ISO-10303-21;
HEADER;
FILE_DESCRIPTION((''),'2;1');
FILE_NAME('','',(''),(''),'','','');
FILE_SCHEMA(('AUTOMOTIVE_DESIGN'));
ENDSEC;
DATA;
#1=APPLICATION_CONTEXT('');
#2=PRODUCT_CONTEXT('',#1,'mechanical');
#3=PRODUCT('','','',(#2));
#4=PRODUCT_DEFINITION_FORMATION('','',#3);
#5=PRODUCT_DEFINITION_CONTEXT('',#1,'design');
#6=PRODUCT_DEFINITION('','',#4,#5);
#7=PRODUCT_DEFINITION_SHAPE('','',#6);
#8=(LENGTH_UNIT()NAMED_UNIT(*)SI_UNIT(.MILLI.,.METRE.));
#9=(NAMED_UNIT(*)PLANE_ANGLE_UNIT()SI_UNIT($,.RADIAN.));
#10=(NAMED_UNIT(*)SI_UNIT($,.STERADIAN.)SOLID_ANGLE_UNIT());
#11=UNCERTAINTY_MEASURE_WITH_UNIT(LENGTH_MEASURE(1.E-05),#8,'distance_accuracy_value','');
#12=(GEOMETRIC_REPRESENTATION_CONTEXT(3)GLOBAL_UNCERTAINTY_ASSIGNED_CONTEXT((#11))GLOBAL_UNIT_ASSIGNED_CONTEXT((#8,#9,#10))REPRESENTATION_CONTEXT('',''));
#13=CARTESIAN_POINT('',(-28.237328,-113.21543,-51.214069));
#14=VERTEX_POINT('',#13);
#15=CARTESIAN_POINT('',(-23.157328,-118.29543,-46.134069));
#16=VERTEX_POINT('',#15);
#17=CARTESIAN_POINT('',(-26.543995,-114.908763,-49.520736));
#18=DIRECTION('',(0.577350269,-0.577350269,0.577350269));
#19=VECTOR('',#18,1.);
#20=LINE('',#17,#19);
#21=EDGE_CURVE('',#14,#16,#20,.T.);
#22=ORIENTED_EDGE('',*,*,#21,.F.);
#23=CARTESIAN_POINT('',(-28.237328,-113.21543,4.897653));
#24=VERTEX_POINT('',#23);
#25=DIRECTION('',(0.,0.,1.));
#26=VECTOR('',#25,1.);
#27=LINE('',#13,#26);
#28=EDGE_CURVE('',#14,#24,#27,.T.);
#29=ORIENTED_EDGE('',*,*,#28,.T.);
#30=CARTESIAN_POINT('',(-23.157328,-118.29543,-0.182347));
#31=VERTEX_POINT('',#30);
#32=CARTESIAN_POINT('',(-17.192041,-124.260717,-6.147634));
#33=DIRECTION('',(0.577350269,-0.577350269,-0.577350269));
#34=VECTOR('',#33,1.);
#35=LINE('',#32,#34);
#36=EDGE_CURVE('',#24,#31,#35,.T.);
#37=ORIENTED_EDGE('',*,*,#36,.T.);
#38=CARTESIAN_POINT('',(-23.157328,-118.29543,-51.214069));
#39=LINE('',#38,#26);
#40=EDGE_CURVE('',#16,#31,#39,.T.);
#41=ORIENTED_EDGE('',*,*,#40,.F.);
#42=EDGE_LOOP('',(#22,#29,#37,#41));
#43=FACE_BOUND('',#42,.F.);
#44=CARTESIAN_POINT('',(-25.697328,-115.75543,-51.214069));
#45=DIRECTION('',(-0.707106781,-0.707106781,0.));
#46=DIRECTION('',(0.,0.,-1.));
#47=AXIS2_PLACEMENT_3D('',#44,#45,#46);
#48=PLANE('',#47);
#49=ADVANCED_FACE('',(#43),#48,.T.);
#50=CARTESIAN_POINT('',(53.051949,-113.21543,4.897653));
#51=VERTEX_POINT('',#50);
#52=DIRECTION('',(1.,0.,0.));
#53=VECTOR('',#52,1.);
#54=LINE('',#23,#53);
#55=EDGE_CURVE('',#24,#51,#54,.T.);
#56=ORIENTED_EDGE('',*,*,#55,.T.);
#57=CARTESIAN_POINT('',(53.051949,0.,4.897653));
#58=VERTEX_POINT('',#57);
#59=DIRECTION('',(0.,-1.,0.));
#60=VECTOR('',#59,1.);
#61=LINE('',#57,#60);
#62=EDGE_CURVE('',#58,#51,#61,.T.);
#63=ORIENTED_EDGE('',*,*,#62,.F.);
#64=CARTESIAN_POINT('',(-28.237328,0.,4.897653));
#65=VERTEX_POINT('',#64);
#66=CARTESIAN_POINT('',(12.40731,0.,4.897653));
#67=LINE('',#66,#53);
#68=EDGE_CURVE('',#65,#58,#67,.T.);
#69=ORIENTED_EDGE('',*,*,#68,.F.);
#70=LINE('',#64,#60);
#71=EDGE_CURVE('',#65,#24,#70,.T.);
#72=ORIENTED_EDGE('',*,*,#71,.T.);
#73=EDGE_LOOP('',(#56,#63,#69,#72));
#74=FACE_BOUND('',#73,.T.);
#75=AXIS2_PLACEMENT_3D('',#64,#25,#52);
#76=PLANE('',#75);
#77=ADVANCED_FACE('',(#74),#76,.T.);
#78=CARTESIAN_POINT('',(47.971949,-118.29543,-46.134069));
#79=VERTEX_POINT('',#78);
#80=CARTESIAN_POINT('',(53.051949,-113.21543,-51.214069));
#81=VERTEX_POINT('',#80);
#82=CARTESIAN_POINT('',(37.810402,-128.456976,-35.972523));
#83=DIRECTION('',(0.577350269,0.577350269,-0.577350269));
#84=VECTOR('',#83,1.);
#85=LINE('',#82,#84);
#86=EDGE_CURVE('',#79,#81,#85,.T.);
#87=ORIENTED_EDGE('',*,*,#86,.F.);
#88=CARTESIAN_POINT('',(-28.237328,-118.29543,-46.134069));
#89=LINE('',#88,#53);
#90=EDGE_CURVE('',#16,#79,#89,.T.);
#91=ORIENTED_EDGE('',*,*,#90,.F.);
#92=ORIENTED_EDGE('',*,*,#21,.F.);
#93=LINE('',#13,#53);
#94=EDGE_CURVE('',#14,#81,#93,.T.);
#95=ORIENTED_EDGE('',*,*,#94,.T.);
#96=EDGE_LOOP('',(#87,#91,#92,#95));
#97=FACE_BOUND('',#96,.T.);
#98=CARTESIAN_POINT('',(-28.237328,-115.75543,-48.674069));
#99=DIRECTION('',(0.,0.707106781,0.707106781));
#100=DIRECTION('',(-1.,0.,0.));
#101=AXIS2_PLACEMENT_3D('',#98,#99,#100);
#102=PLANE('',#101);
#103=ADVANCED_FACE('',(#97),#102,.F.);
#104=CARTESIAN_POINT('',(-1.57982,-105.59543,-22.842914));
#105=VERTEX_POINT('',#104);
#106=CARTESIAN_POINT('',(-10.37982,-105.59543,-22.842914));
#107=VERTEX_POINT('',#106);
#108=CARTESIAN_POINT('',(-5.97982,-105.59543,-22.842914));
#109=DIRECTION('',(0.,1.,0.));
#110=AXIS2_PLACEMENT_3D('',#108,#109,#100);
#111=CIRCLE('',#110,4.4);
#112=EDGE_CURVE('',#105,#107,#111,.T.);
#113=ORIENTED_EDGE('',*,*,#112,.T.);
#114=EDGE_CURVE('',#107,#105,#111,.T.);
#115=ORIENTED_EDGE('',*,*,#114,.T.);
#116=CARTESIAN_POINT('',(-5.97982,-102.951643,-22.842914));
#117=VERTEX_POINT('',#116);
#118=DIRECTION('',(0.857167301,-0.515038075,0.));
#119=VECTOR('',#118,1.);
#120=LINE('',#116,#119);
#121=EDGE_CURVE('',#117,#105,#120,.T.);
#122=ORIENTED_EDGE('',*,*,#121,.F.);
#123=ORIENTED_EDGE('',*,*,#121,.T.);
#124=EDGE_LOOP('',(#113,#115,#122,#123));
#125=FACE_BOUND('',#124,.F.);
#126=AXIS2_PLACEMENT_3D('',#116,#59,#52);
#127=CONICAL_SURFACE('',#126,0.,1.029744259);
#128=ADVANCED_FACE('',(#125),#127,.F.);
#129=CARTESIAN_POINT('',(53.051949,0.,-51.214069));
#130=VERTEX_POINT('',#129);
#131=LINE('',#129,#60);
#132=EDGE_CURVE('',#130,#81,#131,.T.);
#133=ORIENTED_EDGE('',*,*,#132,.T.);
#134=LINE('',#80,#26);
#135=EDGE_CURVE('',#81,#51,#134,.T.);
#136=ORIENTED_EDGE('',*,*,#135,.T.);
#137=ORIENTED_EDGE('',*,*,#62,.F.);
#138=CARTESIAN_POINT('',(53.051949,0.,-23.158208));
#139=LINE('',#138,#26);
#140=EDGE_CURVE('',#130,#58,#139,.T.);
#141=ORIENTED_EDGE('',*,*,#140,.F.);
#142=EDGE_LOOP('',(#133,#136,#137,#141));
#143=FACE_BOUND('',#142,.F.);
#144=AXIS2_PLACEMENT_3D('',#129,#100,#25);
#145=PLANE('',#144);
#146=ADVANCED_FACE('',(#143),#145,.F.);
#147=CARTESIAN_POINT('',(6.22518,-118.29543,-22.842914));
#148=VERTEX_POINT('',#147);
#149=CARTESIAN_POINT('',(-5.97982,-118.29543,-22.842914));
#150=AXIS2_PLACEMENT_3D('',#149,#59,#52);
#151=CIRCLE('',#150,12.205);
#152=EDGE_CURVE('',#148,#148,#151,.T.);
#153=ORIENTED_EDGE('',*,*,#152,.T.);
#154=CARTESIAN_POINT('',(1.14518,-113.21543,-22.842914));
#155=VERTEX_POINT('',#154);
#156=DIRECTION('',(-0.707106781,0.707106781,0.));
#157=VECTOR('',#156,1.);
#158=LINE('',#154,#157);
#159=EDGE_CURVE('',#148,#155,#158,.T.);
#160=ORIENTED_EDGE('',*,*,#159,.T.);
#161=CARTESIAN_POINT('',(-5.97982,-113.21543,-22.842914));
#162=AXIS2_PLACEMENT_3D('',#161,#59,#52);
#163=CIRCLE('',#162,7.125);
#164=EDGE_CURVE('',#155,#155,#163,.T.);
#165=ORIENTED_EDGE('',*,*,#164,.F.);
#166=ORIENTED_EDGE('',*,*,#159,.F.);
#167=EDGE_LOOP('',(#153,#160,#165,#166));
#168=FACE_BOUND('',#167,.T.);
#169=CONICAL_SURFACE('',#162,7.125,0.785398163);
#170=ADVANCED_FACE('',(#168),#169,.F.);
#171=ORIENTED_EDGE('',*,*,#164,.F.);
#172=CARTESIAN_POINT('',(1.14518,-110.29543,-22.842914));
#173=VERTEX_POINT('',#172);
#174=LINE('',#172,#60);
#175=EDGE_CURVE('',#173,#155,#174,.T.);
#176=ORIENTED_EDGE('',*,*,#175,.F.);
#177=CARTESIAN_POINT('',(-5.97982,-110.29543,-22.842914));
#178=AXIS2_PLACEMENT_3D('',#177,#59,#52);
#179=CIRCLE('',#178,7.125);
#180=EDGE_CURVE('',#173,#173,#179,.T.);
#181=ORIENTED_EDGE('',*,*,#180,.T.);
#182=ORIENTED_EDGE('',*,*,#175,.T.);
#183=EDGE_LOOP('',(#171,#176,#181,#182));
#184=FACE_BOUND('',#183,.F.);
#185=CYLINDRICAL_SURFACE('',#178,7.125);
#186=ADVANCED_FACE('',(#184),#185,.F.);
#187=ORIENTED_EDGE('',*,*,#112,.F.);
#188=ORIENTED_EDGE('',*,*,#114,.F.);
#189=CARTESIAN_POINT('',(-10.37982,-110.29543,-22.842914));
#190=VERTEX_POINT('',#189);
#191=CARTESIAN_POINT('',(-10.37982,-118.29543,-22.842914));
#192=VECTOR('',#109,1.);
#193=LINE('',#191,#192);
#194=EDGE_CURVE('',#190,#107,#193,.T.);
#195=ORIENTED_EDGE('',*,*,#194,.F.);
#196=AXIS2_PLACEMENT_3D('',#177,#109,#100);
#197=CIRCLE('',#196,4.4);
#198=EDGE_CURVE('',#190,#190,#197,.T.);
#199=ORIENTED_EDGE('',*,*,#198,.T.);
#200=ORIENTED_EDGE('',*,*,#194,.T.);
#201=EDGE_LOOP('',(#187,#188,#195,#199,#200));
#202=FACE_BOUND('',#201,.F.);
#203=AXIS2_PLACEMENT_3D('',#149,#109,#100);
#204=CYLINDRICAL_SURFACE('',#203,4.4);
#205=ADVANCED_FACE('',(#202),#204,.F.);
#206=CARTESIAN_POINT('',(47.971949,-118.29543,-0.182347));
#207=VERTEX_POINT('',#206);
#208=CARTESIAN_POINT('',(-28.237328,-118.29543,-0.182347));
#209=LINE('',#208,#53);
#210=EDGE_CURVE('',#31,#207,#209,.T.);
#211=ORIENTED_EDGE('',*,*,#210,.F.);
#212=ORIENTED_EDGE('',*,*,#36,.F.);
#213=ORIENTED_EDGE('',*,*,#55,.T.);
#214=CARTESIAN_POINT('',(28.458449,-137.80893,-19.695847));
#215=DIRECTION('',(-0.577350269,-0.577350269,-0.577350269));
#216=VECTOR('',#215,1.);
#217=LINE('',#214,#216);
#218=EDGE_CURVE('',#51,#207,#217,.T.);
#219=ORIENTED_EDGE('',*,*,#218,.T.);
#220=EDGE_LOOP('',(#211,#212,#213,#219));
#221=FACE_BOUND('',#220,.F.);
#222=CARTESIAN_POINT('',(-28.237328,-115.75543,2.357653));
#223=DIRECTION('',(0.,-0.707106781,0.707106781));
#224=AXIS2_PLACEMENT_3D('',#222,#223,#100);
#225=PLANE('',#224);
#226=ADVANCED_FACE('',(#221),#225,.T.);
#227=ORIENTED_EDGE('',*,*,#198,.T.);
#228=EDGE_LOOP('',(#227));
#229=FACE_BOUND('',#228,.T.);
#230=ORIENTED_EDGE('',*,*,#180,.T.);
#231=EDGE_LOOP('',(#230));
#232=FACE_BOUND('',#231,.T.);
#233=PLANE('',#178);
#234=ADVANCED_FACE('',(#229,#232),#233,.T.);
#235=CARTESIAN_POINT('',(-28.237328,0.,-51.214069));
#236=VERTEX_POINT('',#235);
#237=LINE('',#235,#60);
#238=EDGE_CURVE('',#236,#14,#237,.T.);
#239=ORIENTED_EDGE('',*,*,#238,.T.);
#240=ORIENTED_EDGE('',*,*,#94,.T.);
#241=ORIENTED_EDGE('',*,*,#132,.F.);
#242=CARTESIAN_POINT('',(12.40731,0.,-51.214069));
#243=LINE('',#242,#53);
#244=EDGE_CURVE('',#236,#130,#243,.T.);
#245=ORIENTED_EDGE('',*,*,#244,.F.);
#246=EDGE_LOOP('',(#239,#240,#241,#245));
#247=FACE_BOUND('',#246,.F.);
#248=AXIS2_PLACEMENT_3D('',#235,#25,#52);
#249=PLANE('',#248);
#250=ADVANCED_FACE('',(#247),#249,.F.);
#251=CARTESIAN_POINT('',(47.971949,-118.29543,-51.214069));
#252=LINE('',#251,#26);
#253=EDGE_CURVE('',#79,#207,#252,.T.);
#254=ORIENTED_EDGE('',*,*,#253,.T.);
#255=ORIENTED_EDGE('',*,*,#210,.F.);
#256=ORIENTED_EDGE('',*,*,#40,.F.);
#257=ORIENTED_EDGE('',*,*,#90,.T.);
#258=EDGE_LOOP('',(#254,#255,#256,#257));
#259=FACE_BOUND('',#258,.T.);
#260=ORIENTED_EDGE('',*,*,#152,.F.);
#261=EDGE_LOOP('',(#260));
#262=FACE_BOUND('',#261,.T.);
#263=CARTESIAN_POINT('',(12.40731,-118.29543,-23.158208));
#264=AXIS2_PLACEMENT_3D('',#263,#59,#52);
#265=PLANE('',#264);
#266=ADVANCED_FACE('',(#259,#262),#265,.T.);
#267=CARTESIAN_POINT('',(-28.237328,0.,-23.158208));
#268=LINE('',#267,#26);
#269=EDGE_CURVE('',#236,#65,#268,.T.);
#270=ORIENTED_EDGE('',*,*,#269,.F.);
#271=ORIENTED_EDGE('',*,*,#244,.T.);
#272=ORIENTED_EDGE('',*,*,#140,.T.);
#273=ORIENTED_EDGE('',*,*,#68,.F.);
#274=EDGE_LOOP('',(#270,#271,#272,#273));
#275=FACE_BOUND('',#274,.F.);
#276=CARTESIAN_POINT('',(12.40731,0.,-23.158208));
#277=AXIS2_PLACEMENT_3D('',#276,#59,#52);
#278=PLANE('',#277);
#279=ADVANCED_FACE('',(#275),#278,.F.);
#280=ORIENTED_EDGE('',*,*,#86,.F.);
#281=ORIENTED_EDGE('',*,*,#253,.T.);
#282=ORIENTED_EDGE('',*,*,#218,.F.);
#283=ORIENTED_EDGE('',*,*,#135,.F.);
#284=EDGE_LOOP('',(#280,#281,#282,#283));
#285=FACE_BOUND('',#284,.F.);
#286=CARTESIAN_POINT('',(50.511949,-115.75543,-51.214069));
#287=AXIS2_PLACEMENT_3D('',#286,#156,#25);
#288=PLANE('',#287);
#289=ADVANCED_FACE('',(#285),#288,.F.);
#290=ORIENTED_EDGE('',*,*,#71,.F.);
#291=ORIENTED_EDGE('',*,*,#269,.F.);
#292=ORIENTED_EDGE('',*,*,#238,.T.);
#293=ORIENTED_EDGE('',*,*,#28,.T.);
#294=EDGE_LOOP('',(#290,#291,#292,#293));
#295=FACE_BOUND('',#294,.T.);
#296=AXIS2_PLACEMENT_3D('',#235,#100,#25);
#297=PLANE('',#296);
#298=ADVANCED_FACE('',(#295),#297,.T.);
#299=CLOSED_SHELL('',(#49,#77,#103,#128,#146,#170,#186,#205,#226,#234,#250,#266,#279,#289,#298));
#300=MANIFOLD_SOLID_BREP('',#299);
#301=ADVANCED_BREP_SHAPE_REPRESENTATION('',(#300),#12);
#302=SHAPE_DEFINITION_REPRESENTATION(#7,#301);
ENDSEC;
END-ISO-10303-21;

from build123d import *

# Parameters (mm, degrees)
F0_W           = 81.2892764807
F0_H           = 56.1117217876
F1_DEPTH       = 118.29543
F3_D           = 8.8
F3_DEPTH       = 12.7
F3_CBORE_D     = 14.25
F3_CBORE_DEPTH = 8
F3_TIP         = 2.6437867237
F4_SIZE        = 5.08


with BuildPart() as f1:
    # F0 (on Front) → F1 (new body)
    with BuildSketch(Plane.XZ):
        with Locations((12.407310307, -23.1582082342)):
            Rectangle(F0_W, F0_H)
    extrude(amount=F1_DEPTH)

    # F3
    with Locations(Plane.XZ.offset(118.29543)):
        with Locations((-5.9798196889, -22.842913866)):
            CounterBoreHole(F3_D / 2, F3_CBORE_D / 2, F3_CBORE_DEPTH, depth=F3_DEPTH)
            with Locations((0, 0, -(F3_DEPTH + F3_TIP / 2))):  # 118° drill point
                Cone(0, F3_D / 2, F3_TIP, mode=Mode.SUBTRACT)

    # F4
    f4_edges = [f1.edges().sort_by_distance(p)[0] for p in [
        (12.40731, -118.29543, 4.897653),
        (53.051949, -118.29543, -23.158208),
        (-28.237328, -118.29543, -23.158208),
        (12.40731, -118.29543, -51.214069),
        (-13.10482, -118.29543, -22.842914),
    ]]
    chamfer(f4_edges, length=F4_SIZE)


solid = f1.part
